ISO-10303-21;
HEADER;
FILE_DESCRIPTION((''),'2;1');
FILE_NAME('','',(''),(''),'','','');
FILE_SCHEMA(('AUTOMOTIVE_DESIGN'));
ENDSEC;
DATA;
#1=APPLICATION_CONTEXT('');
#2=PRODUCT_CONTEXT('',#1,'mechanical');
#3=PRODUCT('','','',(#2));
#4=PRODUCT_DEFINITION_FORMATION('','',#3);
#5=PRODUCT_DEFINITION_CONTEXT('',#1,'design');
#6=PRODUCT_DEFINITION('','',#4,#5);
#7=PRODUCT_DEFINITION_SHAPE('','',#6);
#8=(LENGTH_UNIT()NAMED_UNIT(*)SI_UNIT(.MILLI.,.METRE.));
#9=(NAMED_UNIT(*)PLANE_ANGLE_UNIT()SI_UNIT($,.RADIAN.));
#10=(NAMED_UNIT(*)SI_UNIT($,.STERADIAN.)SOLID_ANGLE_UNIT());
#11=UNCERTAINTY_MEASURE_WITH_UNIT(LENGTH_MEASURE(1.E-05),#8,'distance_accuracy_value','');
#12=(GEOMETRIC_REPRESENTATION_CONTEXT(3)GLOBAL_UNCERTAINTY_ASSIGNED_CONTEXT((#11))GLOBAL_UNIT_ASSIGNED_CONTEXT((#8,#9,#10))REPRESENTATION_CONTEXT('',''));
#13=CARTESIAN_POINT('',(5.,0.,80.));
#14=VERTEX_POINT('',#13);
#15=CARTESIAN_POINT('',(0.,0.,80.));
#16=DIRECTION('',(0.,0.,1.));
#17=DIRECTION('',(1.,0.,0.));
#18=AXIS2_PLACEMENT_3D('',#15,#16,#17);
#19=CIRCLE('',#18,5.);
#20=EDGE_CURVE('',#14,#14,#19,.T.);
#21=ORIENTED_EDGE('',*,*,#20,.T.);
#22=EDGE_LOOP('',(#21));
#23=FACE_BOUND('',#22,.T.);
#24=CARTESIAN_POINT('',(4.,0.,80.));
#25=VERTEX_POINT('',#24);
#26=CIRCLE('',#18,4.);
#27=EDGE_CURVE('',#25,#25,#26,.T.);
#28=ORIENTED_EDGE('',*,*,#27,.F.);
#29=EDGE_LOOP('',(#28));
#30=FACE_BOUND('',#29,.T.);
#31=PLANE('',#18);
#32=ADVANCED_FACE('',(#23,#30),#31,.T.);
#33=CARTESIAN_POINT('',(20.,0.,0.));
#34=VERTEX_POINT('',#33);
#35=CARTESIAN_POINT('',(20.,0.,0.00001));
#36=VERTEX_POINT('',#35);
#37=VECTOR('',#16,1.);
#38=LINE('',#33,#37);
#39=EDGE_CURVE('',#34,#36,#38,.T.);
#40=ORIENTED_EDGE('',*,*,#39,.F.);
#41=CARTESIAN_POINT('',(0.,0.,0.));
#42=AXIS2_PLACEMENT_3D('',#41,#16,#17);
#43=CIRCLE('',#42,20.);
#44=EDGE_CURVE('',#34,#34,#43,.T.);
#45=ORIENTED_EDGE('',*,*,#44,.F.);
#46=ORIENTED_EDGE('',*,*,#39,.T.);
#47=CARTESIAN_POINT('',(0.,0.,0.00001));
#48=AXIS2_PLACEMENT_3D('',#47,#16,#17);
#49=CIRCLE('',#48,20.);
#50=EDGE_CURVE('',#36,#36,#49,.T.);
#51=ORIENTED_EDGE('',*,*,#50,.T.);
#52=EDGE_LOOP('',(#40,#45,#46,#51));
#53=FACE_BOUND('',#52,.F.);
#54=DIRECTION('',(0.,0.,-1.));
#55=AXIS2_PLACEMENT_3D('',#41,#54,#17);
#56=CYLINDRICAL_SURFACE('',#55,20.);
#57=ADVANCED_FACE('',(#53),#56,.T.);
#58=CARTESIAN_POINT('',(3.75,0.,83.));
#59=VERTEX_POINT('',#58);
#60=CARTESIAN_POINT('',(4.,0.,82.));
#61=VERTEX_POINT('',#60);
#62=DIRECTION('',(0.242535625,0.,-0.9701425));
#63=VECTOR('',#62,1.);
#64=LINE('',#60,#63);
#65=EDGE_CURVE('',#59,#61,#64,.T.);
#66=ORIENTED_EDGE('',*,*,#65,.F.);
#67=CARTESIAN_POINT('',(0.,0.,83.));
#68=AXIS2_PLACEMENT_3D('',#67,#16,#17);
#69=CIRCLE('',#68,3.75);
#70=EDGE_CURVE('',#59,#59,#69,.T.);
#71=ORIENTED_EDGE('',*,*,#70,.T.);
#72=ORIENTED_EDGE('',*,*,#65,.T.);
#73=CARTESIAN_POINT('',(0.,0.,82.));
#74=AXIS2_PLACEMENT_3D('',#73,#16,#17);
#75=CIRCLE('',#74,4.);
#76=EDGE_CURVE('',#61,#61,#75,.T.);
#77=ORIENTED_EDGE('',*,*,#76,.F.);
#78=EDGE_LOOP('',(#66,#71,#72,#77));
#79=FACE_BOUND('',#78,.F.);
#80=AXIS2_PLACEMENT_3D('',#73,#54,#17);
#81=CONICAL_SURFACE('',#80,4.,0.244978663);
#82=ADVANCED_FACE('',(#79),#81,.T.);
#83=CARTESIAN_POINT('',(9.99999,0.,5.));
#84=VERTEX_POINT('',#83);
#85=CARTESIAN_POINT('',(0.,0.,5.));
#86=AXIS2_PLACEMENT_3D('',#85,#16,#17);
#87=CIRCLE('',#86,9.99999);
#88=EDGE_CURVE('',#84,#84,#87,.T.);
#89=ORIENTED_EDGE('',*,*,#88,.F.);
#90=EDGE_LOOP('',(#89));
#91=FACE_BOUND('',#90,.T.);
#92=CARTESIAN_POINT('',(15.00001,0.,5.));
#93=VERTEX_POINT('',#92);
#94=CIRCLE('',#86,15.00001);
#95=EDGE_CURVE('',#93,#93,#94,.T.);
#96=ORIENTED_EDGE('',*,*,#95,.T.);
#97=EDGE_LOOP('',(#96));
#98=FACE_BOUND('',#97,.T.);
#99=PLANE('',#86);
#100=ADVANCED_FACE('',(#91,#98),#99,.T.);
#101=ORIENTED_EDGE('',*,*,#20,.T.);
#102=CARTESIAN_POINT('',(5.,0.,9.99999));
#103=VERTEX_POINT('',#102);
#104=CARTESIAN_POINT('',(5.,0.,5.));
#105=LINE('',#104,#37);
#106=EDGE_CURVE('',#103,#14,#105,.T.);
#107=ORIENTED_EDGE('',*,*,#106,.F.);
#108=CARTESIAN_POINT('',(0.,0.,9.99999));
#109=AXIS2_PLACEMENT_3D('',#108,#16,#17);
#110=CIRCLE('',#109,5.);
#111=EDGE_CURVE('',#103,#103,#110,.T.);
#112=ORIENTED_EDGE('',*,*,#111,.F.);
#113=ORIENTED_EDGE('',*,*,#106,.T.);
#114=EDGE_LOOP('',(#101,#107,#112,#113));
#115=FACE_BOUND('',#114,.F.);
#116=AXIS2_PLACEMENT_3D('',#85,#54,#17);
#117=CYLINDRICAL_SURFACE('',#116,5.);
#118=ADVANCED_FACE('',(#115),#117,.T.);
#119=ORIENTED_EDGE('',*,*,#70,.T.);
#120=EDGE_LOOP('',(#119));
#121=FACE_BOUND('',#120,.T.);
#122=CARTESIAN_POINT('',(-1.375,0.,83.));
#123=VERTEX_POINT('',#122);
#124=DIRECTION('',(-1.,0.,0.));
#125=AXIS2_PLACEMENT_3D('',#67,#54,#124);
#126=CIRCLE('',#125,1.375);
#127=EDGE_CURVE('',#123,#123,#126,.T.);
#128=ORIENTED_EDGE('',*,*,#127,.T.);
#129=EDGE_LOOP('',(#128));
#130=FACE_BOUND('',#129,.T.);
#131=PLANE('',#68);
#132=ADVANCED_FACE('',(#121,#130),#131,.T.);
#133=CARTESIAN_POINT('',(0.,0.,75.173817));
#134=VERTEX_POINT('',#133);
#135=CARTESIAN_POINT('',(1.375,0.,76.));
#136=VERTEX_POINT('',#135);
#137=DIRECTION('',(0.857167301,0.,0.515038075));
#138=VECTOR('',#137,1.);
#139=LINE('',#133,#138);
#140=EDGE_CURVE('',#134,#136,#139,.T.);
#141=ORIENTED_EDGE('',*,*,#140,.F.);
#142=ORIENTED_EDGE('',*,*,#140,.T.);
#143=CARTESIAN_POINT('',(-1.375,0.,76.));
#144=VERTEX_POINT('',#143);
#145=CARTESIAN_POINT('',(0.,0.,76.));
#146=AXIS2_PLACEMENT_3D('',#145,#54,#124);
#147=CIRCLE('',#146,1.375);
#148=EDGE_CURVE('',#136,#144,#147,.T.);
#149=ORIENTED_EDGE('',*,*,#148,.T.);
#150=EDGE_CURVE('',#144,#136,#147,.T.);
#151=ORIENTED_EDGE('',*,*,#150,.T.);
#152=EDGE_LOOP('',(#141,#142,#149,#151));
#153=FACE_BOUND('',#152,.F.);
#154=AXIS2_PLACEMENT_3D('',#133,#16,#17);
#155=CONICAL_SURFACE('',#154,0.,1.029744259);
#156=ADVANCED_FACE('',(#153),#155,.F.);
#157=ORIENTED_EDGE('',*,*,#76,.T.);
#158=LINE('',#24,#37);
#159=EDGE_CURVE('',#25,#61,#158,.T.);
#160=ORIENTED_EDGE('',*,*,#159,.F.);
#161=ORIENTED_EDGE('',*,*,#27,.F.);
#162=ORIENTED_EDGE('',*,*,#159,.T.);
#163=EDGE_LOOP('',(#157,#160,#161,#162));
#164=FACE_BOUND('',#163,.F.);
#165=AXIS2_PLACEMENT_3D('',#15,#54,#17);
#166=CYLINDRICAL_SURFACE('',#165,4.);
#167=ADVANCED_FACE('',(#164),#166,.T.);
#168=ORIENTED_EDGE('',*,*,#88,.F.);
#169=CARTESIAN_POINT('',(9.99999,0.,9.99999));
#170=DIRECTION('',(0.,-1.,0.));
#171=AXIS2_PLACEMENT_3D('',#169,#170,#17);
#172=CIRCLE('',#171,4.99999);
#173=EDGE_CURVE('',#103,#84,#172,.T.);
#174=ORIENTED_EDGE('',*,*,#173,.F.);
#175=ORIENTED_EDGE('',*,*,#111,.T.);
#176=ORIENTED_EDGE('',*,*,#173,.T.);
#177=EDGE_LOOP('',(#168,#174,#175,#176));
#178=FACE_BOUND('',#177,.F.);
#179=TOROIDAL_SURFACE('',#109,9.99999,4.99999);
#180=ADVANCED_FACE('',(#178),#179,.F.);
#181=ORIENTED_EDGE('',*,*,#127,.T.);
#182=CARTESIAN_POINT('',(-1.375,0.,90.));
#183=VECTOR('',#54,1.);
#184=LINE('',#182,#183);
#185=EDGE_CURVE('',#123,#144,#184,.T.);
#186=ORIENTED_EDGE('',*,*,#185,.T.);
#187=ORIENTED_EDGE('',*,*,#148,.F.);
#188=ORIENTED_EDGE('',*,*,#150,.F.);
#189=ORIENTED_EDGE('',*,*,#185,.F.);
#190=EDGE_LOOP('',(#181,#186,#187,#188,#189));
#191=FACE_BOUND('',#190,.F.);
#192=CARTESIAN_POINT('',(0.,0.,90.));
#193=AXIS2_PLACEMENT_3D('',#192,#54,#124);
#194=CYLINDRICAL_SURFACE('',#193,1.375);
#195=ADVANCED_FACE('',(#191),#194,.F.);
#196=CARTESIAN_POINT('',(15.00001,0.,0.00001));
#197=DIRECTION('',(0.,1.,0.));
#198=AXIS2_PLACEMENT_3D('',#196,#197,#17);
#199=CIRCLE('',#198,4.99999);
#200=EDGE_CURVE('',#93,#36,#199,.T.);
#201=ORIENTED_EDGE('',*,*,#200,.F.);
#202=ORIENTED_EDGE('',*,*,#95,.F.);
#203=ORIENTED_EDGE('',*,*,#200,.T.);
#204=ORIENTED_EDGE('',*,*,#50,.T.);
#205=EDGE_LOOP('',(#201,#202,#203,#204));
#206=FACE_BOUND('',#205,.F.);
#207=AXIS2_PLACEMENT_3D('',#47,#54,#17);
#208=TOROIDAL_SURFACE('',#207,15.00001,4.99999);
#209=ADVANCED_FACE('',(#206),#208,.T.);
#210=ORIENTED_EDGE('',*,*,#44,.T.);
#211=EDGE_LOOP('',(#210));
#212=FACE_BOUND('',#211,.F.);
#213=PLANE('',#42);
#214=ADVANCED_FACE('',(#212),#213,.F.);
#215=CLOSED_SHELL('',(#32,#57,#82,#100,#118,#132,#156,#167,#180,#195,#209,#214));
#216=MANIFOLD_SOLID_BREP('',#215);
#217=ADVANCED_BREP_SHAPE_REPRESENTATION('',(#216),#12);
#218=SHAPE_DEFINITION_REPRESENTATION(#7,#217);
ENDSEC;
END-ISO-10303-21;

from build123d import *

# Parameters (mm, degrees)
F0_R     = 20
F1_DEPTH = 5
F2_R     = 5
F3_DEPTH = 75
F4_R     = 4
F5_DEPTH = 3
F6_SIZE2 = 1
F6_SIZE  = 0.25
F7_R     = 4.99999
F9_D     = 2.75
F9_DEPTH = 7
F9_TIP   = 0.8261833512


# Not quite as in the source:
# - a fillet or chamfer is up to 0.001 mm smaller than in the source, because OpenCascade refuses the exact size


with BuildPart() as f1:
    # F0 (on Top) → F1 (new body)
    with BuildSketch(Plane.XY):
        Circle(F0_R)
    extrude(amount=F1_DEPTH)

    # F2 (on face) → F3 (join)
    with BuildSketch(Plane.XY.offset(5)):
        Circle(F2_R)
    extrude(amount=F3_DEPTH)

    # F4 (on face) → F5 (join)
    with BuildSketch(Plane.XY.offset(80)):
        Circle(F4_R)
    extrude(amount=F5_DEPTH)

    # F6
    f6_edges = [f1.edges().sort_by_distance(p)[0] for p in [
        (-4, 0, 83),
    ]]
    f6_side = f1.faces().sort_by_distance((0, 0, 83))[0]
    chamfer(f6_edges, length=F6_SIZE, length2=F6_SIZE2, reference=f6_side)

    # F7 (radius 5 in the source; OpenCascade refuses exactly that, so slightly less here)
    f7_edges = [f1.edges().sort_by_distance(p)[0] for p in [
        (-20, 0, 5),
        (-5, 0, 5),
    ]]
    fillet(f7_edges, radius=F7_R)

    # F9
    with Locations(Plane.XY.offset(83)):
        with Locations((0, 0)):
            Hole(F9_D / 2, depth=F9_DEPTH)
            with Locations((0, 0, -(F9_DEPTH + F9_TIP / 2))):  # 118° drill point
                Cone(0, F9_D / 2, F9_TIP, mode=Mode.SUBTRACT)


solid = f1.part
